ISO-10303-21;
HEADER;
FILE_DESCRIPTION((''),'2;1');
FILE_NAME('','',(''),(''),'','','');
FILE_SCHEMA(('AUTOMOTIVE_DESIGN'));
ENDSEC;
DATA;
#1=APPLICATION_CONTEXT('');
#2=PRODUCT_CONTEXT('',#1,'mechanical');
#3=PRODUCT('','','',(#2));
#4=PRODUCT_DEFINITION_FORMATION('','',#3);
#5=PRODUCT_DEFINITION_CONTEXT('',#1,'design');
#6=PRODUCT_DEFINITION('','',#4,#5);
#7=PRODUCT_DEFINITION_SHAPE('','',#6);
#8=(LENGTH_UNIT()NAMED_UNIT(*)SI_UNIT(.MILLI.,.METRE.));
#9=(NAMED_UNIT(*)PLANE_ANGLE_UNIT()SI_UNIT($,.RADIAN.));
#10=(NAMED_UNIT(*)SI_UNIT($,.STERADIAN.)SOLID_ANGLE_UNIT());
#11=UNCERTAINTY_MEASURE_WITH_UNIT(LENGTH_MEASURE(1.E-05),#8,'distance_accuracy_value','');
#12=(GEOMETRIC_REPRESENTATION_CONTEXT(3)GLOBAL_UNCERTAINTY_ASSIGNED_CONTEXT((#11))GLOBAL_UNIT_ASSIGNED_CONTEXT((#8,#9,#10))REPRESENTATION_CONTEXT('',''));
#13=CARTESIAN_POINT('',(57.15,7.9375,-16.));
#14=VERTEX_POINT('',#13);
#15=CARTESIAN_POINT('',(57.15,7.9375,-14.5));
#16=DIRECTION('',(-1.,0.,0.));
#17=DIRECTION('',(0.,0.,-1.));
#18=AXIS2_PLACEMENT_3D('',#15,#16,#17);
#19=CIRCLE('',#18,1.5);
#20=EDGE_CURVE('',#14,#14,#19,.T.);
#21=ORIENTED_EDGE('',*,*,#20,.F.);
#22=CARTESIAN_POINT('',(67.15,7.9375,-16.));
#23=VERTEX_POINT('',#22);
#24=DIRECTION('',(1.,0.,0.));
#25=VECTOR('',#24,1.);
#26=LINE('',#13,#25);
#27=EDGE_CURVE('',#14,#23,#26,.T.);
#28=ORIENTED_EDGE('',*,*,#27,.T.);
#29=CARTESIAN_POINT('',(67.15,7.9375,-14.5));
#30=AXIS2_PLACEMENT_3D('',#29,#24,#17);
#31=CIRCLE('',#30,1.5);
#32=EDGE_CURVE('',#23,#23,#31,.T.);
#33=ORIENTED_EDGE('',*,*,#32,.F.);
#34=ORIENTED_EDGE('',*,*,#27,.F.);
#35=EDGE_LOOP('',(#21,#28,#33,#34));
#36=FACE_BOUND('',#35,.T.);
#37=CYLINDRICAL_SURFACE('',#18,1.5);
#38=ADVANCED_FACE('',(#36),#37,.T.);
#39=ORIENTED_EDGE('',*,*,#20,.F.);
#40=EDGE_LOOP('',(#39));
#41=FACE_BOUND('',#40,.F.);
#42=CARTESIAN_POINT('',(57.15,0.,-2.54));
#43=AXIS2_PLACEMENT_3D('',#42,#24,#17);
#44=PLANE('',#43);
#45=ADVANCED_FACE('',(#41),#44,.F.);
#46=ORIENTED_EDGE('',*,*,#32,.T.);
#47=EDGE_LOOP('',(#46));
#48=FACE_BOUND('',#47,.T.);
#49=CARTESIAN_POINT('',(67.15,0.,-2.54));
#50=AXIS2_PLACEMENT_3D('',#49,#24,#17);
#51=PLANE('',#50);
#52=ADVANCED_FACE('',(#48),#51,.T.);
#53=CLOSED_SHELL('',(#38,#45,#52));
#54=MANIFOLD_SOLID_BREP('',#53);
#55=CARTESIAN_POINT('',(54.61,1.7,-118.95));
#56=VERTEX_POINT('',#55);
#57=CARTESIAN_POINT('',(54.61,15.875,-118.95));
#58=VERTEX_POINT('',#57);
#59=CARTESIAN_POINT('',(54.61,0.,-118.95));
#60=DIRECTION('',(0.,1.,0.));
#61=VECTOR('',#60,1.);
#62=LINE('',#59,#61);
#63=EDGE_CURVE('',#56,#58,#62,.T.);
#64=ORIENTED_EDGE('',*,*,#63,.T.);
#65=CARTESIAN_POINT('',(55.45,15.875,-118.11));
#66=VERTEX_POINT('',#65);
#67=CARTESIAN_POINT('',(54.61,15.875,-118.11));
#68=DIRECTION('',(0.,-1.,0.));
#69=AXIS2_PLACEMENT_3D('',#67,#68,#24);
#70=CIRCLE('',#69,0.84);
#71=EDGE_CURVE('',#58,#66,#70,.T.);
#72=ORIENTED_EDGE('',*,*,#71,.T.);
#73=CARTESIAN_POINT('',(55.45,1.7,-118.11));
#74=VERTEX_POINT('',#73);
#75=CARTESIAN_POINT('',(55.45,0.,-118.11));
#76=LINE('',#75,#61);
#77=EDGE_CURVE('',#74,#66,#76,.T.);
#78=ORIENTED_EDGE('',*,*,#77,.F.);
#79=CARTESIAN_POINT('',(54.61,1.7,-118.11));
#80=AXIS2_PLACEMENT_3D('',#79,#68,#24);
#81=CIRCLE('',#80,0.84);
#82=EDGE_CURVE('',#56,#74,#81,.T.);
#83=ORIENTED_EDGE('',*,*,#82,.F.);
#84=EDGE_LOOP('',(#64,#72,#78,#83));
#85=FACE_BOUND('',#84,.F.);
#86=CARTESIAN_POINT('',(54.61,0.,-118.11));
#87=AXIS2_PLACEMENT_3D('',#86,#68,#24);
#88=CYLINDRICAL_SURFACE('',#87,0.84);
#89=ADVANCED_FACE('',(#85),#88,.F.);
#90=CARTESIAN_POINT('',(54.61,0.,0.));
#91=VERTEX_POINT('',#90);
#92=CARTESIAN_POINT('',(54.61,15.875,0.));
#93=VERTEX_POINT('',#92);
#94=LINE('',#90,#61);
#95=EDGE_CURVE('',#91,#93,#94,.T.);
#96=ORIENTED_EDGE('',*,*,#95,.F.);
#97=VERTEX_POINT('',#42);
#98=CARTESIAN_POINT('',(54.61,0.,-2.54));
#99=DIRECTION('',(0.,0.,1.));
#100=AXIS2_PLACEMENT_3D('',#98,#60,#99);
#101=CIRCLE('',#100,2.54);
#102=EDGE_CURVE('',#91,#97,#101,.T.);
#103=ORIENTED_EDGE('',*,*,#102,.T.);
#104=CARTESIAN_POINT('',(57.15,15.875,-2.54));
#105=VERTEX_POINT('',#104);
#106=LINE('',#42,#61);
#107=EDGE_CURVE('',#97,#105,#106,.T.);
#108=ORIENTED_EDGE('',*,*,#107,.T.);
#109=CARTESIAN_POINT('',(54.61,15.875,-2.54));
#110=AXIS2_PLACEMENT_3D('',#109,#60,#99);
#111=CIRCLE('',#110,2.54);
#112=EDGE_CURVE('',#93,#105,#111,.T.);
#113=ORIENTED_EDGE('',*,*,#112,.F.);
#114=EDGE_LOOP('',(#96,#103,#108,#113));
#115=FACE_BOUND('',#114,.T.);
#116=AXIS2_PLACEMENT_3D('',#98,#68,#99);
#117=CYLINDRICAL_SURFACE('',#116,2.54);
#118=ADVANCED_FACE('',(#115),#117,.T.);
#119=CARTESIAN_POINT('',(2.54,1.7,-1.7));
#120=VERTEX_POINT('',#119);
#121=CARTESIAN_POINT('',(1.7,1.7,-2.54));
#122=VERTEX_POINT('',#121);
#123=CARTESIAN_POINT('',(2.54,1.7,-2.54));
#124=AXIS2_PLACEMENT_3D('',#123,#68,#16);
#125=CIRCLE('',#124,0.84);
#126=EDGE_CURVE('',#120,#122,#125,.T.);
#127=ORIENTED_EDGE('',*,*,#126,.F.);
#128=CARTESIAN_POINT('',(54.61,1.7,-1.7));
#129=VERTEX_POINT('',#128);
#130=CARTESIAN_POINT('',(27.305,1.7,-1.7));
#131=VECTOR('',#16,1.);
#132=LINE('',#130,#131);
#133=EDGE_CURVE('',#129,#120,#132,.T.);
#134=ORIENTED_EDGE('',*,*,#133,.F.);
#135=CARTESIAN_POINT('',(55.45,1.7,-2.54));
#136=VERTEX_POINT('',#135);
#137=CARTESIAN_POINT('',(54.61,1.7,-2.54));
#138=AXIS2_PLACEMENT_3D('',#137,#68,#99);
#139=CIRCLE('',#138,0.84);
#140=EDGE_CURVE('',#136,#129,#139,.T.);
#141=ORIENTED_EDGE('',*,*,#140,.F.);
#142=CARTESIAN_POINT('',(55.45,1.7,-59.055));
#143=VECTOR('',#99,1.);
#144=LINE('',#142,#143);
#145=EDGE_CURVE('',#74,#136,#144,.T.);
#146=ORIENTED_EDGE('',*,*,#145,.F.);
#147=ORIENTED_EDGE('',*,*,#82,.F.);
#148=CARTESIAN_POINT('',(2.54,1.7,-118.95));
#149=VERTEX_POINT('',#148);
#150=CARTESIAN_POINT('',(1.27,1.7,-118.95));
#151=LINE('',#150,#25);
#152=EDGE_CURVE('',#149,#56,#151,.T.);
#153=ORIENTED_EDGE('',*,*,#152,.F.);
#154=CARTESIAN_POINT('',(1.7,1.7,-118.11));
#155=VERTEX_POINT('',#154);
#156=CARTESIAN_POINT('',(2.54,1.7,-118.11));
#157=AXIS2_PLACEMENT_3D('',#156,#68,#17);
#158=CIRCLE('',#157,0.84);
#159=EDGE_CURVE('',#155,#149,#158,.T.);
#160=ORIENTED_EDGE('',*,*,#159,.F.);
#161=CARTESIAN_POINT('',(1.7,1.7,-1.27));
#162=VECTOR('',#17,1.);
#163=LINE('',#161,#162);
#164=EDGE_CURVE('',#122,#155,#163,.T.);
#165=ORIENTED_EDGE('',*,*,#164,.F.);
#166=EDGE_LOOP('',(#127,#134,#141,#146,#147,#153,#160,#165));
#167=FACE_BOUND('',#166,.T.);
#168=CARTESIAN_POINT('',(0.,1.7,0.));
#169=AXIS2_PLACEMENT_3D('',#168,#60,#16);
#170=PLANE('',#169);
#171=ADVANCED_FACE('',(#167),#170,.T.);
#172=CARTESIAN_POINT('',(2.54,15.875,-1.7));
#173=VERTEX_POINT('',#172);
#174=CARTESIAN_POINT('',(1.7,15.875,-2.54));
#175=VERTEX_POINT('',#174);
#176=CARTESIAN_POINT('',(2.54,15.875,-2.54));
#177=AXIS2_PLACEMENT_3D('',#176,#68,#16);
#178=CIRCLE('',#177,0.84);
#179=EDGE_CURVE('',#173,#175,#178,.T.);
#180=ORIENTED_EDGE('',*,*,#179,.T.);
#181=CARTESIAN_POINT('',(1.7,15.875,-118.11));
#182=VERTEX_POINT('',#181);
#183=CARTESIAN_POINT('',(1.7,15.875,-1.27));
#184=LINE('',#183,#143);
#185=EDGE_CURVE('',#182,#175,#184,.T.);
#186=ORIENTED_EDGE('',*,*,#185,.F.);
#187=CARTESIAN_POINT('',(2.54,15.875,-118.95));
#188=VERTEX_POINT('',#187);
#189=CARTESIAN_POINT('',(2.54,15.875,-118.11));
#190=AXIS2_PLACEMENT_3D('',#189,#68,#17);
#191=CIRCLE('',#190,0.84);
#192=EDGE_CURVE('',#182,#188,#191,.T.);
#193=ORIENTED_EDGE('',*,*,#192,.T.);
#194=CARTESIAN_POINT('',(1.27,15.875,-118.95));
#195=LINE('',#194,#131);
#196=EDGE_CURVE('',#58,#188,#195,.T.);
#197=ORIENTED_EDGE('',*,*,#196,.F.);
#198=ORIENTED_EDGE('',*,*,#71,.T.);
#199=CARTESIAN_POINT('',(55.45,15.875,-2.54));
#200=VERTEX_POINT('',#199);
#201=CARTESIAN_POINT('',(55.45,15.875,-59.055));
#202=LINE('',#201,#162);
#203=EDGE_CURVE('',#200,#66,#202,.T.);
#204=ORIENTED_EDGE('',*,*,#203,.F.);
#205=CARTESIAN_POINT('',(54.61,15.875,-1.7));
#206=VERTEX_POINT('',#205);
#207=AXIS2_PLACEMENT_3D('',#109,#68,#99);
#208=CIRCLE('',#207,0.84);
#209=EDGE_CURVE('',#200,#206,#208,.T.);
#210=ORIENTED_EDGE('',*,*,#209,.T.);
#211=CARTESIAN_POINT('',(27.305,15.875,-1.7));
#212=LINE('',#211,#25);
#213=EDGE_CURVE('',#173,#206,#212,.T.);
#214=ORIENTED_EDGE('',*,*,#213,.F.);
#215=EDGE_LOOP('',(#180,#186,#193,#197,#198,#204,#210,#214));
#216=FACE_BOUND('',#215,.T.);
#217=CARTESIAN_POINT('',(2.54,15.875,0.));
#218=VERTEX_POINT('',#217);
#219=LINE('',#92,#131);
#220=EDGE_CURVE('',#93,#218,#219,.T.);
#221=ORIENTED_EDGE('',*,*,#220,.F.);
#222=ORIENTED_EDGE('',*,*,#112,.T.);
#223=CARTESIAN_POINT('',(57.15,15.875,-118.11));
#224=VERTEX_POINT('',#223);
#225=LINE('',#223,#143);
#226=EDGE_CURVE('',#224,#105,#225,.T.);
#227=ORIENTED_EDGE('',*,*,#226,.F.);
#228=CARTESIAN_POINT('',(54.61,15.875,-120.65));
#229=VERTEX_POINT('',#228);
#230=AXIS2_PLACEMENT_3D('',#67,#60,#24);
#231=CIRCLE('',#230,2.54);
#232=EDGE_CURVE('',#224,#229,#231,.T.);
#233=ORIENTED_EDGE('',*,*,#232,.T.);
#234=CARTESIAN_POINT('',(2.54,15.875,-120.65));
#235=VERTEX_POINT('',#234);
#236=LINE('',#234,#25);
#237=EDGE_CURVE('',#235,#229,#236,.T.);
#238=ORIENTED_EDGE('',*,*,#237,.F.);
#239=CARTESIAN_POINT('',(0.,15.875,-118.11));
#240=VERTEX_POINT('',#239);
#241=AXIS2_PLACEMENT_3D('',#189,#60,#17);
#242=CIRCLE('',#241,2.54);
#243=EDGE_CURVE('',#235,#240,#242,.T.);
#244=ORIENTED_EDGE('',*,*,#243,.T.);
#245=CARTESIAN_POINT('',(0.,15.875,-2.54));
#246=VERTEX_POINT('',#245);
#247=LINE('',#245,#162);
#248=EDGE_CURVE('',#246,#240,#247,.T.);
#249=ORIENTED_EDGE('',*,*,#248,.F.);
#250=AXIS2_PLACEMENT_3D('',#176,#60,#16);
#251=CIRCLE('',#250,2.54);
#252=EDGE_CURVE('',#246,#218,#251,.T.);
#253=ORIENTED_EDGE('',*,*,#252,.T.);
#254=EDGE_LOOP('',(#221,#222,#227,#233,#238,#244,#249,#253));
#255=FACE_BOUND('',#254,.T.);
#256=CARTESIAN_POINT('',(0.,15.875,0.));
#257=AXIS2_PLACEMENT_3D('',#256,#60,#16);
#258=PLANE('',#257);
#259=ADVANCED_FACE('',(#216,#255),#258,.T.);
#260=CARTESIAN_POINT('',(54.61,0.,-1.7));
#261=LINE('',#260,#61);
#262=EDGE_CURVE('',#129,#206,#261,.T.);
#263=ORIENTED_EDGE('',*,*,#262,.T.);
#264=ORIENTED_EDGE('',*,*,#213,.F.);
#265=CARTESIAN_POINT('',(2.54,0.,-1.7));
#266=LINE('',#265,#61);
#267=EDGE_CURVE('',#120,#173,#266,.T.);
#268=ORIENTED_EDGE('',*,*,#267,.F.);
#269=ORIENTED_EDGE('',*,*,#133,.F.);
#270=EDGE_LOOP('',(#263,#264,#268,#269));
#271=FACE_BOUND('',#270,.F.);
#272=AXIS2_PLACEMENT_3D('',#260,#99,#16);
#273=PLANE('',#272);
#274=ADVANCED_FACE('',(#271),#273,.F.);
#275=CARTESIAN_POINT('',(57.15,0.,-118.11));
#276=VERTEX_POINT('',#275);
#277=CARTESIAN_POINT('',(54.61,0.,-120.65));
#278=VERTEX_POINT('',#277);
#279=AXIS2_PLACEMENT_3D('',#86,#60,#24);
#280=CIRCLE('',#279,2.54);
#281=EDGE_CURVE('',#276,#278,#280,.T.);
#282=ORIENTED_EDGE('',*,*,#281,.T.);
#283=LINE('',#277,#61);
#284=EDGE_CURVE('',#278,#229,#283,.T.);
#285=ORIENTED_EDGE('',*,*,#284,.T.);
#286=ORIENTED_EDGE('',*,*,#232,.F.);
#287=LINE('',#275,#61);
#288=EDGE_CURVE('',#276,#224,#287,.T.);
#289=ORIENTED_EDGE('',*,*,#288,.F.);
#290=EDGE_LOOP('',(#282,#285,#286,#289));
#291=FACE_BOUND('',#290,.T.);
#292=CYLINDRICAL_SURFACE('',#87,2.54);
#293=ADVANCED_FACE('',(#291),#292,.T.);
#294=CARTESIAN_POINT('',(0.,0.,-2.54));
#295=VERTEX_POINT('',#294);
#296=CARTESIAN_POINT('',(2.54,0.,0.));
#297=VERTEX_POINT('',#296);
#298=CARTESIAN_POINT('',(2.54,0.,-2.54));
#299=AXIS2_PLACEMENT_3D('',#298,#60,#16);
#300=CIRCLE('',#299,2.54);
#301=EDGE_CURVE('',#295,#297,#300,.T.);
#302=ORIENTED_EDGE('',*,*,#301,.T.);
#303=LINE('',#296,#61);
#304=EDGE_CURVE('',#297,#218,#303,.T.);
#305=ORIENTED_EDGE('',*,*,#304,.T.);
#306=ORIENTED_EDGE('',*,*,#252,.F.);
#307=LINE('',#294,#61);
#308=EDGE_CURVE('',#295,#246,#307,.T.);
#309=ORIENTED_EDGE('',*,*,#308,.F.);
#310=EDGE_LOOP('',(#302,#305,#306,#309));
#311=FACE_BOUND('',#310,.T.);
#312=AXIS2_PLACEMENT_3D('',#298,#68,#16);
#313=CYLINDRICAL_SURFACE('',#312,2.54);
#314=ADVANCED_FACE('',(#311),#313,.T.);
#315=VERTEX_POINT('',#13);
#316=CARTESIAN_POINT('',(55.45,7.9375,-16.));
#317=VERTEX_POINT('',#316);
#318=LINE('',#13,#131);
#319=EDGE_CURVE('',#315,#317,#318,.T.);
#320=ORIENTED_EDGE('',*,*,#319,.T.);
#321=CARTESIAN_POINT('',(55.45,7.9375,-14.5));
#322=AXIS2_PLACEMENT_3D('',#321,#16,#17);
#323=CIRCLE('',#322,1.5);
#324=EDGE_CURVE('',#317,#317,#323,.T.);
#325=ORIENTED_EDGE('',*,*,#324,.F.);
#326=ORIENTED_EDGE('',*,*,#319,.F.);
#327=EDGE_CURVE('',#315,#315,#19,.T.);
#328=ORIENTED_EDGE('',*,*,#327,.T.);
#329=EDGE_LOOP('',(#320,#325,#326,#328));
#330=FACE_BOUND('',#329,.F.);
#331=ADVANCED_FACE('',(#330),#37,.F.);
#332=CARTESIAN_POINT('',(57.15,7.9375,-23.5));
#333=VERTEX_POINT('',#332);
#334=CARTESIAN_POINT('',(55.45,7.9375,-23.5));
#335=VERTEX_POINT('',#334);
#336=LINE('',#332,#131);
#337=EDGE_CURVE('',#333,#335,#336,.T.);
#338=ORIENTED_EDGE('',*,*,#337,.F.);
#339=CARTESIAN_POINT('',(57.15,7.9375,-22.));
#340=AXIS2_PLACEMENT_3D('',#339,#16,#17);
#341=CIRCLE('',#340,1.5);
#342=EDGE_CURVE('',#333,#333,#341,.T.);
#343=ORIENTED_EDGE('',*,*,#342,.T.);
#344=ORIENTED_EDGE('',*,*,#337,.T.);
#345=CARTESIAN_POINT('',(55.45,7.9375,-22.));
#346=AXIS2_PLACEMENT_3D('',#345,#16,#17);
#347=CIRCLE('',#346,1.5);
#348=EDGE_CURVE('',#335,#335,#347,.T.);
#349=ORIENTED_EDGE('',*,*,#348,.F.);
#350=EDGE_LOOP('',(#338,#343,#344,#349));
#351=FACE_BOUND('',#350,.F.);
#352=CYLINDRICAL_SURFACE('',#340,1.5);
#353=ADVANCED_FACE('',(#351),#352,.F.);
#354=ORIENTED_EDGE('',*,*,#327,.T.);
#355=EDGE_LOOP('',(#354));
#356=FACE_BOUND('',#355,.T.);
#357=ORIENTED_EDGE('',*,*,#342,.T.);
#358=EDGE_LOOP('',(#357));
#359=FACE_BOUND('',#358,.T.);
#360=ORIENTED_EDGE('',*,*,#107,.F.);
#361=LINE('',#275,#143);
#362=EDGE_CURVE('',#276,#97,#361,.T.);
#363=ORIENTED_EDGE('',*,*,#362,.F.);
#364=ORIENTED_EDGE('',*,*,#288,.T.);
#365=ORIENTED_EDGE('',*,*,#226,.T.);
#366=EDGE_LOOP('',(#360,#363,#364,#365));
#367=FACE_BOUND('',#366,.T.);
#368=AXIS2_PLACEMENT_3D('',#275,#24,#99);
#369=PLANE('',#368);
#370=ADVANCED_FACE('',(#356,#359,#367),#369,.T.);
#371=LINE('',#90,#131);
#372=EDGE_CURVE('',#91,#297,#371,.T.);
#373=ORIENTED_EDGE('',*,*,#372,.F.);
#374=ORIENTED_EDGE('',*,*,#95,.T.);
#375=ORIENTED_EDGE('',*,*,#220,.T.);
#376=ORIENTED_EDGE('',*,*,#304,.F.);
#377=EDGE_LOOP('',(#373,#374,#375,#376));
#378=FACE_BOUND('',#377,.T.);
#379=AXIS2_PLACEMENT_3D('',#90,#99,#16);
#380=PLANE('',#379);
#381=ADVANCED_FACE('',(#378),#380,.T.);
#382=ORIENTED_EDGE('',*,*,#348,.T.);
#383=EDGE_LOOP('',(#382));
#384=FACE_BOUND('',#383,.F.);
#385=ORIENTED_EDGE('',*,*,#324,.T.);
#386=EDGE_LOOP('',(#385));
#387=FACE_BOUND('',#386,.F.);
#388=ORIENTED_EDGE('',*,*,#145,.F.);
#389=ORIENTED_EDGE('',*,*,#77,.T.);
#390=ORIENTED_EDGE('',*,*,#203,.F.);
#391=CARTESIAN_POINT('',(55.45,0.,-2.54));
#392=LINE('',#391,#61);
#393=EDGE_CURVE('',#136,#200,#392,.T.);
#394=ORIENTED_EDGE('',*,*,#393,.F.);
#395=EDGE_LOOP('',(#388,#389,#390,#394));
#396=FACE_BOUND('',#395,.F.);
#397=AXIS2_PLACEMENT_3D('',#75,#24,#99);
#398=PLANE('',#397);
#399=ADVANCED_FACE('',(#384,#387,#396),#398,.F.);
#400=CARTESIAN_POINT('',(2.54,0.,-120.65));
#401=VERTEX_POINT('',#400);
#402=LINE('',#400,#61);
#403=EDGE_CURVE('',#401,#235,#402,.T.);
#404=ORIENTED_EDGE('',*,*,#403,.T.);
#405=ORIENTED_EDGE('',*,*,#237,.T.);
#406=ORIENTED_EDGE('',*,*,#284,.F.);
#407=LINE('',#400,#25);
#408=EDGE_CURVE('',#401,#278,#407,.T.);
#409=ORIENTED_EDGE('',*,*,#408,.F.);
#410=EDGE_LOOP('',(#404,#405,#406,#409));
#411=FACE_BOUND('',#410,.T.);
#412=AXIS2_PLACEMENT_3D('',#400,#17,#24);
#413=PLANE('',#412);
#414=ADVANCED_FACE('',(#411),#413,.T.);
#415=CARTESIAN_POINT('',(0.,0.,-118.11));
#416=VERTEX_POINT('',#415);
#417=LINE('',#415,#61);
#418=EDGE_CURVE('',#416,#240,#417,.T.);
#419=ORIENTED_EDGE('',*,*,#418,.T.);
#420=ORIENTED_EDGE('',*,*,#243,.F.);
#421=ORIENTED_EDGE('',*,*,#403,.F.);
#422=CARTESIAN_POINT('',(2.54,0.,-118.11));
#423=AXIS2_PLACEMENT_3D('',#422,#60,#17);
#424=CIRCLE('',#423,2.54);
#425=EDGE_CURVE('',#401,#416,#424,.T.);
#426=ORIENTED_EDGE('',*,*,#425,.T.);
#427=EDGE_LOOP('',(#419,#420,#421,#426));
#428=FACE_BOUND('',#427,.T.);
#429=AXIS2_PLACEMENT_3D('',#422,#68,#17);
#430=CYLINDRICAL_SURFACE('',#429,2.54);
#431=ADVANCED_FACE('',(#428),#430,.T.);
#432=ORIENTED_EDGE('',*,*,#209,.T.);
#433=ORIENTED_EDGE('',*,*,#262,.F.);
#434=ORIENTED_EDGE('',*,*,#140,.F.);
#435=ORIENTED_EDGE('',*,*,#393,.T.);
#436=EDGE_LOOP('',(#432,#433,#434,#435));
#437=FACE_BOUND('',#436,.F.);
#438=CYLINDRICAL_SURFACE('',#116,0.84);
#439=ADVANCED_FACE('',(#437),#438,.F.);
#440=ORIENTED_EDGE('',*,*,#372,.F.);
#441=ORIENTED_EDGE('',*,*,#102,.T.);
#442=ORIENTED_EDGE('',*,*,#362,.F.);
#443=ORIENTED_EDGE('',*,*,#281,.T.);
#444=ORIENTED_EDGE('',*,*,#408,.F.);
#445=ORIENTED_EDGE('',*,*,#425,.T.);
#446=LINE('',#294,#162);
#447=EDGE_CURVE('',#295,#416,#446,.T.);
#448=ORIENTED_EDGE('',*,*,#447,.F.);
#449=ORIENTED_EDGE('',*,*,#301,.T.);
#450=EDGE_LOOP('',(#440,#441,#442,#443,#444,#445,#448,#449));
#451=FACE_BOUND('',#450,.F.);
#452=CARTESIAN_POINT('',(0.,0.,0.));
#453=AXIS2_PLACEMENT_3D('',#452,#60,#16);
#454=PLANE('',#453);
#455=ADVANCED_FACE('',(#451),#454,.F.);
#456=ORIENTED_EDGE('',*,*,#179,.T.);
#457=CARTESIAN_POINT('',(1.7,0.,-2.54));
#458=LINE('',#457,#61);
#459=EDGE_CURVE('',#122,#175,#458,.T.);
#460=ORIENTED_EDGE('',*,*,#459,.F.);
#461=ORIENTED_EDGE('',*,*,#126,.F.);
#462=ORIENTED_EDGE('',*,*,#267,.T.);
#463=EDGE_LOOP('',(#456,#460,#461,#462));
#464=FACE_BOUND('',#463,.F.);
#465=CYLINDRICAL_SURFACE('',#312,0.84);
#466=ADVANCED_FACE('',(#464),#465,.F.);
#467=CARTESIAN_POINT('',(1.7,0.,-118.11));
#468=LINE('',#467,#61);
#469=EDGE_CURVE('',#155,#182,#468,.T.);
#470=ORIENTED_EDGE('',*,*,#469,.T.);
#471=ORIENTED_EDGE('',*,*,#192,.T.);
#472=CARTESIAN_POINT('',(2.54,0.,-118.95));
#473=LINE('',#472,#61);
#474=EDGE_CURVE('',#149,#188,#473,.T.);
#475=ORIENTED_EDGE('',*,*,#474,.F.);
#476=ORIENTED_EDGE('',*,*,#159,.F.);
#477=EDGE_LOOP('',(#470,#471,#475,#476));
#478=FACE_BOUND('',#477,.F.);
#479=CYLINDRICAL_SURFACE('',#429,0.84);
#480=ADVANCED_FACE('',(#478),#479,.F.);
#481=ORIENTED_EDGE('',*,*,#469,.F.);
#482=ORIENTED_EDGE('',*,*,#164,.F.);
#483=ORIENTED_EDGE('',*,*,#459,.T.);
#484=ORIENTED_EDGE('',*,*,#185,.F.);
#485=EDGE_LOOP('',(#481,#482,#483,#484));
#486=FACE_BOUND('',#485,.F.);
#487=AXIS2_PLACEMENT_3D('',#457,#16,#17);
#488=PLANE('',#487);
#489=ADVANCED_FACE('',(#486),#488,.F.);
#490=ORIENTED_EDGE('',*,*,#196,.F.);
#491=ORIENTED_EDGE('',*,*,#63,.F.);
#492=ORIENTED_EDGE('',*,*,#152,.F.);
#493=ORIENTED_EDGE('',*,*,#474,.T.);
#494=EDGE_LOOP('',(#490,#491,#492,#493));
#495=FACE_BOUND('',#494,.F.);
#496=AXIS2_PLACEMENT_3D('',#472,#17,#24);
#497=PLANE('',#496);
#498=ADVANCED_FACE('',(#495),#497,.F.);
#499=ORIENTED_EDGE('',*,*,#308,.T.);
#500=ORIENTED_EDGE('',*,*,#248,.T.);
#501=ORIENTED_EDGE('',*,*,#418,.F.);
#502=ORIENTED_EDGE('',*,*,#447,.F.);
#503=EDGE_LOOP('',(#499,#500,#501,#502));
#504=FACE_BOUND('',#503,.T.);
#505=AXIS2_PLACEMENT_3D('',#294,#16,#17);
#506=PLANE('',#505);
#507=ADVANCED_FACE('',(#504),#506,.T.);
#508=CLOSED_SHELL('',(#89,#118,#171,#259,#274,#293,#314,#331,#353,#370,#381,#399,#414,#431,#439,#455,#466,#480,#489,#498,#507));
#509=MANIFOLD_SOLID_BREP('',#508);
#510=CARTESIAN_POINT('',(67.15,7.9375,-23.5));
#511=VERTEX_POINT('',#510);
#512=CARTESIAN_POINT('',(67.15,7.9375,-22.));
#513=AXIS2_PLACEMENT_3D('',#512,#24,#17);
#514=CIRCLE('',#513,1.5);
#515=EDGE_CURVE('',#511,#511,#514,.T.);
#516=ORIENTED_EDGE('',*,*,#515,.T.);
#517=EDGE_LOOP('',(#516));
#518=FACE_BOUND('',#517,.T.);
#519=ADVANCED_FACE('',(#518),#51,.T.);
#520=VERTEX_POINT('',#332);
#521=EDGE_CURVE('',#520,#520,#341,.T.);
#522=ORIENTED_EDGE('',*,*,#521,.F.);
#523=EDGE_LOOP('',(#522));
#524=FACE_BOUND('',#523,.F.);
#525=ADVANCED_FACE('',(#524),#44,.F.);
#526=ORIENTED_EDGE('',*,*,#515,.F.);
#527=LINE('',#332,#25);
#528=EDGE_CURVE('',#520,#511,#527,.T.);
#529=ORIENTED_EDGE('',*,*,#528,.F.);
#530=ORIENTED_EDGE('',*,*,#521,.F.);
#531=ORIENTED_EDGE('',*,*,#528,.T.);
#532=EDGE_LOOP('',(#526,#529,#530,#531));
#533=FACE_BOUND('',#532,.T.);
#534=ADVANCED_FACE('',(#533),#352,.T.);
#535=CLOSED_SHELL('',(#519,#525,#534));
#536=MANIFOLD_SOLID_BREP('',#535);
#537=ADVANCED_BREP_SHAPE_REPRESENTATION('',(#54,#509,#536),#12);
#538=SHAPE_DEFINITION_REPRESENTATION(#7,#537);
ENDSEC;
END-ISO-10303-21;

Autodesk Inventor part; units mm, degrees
ref_plane "YZ Plane" through (0, 0, 0) normal (1, 0, 0) x (0, 1, 0)
ref_plane "XZ Plane" through (0, 0, 0) normal (0, 1, 0) x (-1, 0, 0)
ref_plane "XY Plane" through (0, 0, 0) normal (0, 0, 1) x (1, 0, 0)
sketch "Sketch1" plane through (0, 0, 0) normal (0, 1, 0) x (-1, 0, 0)
  line L0 (-57.15, -118.11) -> (-57.15, -2.54)
  arc A0 (-57.15, -118.11) -> (-54.61, -120.65) centre (-54.61, -118.11) ccw
  line L1 (-2.54, -120.65) -> (-54.61, -120.65)
  arc A1 (-2.54, -120.65) -> (0, -118.11) centre (-2.54, -118.11) ccw
  line L2 (0, -2.54) -> (0, -118.11)
  arc A2 (0, -2.54) -> (-2.54, 0) centre (-2.54, -2.54) ccw
  line L3 (-54.61, 0) -> (-2.54, 0)
  arc A3 (-54.61, 0) -> (-57.15, -2.54) centre (-54.61, -2.54) ccw
  point P0 (0, 0)
  point P1 (0, 0)
extrude "Extrusion1" add sketch "Sketch1" along normal blind 15.875
shell "Shell1" thickness 1.7 removed faces 1 at (38.1, 15.875, -41.0633)
sketch "Sketch2" plane through (57.15, 0, -2.54) normal (1, 0, 0) x (0, 0, -1)
  line L0 (0, 0) -> (115.57, 0) projected
  line L1 (115.57, 0) -> (115.57, 15.875) projected
  line L2 (0, 15.875) -> (115.57, 15.875) projected
  line L3 (0, 0) -> (0, 15.875) projected
  line L4 (118.11, 0) -> (118.11, 15.875) projected
  line L5 (-2.54, 0) -> (-2.54, 15.875) projected
  point P0 (11.96, 7.9375)
  point P1 (19.46, 7.9375)
  point P2 (0, 7.9375)
  dimension "d12" = 14.5
  dimension "d13" = 7.5
hole "Hole2" at (57.15, 7.9375, -14.5) at (57.15, 7.9375, -22) direction (-1, 0, 0) diameter 3 end up to surface
sketch "Sketch4" plane through (57.15, 0, -2.54) normal (1, 0, 0) x (0, 0, -1)
  circle A0 centre (11.96, 7.9375) radius 1.5 projected
  circle A1 centre (19.46, 7.9375) radius 1.5 projected
  line L0 (0, 0) -> (115.57, 0) projected
  line L1 (115.57, 0) -> (115.57, 15.875) projected
  line L2 (0, 15.875) -> (115.57, 15.875) projected
  line L3 (0, 0) -> (0, 15.875) projected
  point P0 (-2.54, 0)
extrude "Extrusion2" add sketch "Sketch4" along normal blind 10 contours A0 | A1
properties part number "739136_Holder" material "Polystyrene, High Impact"
